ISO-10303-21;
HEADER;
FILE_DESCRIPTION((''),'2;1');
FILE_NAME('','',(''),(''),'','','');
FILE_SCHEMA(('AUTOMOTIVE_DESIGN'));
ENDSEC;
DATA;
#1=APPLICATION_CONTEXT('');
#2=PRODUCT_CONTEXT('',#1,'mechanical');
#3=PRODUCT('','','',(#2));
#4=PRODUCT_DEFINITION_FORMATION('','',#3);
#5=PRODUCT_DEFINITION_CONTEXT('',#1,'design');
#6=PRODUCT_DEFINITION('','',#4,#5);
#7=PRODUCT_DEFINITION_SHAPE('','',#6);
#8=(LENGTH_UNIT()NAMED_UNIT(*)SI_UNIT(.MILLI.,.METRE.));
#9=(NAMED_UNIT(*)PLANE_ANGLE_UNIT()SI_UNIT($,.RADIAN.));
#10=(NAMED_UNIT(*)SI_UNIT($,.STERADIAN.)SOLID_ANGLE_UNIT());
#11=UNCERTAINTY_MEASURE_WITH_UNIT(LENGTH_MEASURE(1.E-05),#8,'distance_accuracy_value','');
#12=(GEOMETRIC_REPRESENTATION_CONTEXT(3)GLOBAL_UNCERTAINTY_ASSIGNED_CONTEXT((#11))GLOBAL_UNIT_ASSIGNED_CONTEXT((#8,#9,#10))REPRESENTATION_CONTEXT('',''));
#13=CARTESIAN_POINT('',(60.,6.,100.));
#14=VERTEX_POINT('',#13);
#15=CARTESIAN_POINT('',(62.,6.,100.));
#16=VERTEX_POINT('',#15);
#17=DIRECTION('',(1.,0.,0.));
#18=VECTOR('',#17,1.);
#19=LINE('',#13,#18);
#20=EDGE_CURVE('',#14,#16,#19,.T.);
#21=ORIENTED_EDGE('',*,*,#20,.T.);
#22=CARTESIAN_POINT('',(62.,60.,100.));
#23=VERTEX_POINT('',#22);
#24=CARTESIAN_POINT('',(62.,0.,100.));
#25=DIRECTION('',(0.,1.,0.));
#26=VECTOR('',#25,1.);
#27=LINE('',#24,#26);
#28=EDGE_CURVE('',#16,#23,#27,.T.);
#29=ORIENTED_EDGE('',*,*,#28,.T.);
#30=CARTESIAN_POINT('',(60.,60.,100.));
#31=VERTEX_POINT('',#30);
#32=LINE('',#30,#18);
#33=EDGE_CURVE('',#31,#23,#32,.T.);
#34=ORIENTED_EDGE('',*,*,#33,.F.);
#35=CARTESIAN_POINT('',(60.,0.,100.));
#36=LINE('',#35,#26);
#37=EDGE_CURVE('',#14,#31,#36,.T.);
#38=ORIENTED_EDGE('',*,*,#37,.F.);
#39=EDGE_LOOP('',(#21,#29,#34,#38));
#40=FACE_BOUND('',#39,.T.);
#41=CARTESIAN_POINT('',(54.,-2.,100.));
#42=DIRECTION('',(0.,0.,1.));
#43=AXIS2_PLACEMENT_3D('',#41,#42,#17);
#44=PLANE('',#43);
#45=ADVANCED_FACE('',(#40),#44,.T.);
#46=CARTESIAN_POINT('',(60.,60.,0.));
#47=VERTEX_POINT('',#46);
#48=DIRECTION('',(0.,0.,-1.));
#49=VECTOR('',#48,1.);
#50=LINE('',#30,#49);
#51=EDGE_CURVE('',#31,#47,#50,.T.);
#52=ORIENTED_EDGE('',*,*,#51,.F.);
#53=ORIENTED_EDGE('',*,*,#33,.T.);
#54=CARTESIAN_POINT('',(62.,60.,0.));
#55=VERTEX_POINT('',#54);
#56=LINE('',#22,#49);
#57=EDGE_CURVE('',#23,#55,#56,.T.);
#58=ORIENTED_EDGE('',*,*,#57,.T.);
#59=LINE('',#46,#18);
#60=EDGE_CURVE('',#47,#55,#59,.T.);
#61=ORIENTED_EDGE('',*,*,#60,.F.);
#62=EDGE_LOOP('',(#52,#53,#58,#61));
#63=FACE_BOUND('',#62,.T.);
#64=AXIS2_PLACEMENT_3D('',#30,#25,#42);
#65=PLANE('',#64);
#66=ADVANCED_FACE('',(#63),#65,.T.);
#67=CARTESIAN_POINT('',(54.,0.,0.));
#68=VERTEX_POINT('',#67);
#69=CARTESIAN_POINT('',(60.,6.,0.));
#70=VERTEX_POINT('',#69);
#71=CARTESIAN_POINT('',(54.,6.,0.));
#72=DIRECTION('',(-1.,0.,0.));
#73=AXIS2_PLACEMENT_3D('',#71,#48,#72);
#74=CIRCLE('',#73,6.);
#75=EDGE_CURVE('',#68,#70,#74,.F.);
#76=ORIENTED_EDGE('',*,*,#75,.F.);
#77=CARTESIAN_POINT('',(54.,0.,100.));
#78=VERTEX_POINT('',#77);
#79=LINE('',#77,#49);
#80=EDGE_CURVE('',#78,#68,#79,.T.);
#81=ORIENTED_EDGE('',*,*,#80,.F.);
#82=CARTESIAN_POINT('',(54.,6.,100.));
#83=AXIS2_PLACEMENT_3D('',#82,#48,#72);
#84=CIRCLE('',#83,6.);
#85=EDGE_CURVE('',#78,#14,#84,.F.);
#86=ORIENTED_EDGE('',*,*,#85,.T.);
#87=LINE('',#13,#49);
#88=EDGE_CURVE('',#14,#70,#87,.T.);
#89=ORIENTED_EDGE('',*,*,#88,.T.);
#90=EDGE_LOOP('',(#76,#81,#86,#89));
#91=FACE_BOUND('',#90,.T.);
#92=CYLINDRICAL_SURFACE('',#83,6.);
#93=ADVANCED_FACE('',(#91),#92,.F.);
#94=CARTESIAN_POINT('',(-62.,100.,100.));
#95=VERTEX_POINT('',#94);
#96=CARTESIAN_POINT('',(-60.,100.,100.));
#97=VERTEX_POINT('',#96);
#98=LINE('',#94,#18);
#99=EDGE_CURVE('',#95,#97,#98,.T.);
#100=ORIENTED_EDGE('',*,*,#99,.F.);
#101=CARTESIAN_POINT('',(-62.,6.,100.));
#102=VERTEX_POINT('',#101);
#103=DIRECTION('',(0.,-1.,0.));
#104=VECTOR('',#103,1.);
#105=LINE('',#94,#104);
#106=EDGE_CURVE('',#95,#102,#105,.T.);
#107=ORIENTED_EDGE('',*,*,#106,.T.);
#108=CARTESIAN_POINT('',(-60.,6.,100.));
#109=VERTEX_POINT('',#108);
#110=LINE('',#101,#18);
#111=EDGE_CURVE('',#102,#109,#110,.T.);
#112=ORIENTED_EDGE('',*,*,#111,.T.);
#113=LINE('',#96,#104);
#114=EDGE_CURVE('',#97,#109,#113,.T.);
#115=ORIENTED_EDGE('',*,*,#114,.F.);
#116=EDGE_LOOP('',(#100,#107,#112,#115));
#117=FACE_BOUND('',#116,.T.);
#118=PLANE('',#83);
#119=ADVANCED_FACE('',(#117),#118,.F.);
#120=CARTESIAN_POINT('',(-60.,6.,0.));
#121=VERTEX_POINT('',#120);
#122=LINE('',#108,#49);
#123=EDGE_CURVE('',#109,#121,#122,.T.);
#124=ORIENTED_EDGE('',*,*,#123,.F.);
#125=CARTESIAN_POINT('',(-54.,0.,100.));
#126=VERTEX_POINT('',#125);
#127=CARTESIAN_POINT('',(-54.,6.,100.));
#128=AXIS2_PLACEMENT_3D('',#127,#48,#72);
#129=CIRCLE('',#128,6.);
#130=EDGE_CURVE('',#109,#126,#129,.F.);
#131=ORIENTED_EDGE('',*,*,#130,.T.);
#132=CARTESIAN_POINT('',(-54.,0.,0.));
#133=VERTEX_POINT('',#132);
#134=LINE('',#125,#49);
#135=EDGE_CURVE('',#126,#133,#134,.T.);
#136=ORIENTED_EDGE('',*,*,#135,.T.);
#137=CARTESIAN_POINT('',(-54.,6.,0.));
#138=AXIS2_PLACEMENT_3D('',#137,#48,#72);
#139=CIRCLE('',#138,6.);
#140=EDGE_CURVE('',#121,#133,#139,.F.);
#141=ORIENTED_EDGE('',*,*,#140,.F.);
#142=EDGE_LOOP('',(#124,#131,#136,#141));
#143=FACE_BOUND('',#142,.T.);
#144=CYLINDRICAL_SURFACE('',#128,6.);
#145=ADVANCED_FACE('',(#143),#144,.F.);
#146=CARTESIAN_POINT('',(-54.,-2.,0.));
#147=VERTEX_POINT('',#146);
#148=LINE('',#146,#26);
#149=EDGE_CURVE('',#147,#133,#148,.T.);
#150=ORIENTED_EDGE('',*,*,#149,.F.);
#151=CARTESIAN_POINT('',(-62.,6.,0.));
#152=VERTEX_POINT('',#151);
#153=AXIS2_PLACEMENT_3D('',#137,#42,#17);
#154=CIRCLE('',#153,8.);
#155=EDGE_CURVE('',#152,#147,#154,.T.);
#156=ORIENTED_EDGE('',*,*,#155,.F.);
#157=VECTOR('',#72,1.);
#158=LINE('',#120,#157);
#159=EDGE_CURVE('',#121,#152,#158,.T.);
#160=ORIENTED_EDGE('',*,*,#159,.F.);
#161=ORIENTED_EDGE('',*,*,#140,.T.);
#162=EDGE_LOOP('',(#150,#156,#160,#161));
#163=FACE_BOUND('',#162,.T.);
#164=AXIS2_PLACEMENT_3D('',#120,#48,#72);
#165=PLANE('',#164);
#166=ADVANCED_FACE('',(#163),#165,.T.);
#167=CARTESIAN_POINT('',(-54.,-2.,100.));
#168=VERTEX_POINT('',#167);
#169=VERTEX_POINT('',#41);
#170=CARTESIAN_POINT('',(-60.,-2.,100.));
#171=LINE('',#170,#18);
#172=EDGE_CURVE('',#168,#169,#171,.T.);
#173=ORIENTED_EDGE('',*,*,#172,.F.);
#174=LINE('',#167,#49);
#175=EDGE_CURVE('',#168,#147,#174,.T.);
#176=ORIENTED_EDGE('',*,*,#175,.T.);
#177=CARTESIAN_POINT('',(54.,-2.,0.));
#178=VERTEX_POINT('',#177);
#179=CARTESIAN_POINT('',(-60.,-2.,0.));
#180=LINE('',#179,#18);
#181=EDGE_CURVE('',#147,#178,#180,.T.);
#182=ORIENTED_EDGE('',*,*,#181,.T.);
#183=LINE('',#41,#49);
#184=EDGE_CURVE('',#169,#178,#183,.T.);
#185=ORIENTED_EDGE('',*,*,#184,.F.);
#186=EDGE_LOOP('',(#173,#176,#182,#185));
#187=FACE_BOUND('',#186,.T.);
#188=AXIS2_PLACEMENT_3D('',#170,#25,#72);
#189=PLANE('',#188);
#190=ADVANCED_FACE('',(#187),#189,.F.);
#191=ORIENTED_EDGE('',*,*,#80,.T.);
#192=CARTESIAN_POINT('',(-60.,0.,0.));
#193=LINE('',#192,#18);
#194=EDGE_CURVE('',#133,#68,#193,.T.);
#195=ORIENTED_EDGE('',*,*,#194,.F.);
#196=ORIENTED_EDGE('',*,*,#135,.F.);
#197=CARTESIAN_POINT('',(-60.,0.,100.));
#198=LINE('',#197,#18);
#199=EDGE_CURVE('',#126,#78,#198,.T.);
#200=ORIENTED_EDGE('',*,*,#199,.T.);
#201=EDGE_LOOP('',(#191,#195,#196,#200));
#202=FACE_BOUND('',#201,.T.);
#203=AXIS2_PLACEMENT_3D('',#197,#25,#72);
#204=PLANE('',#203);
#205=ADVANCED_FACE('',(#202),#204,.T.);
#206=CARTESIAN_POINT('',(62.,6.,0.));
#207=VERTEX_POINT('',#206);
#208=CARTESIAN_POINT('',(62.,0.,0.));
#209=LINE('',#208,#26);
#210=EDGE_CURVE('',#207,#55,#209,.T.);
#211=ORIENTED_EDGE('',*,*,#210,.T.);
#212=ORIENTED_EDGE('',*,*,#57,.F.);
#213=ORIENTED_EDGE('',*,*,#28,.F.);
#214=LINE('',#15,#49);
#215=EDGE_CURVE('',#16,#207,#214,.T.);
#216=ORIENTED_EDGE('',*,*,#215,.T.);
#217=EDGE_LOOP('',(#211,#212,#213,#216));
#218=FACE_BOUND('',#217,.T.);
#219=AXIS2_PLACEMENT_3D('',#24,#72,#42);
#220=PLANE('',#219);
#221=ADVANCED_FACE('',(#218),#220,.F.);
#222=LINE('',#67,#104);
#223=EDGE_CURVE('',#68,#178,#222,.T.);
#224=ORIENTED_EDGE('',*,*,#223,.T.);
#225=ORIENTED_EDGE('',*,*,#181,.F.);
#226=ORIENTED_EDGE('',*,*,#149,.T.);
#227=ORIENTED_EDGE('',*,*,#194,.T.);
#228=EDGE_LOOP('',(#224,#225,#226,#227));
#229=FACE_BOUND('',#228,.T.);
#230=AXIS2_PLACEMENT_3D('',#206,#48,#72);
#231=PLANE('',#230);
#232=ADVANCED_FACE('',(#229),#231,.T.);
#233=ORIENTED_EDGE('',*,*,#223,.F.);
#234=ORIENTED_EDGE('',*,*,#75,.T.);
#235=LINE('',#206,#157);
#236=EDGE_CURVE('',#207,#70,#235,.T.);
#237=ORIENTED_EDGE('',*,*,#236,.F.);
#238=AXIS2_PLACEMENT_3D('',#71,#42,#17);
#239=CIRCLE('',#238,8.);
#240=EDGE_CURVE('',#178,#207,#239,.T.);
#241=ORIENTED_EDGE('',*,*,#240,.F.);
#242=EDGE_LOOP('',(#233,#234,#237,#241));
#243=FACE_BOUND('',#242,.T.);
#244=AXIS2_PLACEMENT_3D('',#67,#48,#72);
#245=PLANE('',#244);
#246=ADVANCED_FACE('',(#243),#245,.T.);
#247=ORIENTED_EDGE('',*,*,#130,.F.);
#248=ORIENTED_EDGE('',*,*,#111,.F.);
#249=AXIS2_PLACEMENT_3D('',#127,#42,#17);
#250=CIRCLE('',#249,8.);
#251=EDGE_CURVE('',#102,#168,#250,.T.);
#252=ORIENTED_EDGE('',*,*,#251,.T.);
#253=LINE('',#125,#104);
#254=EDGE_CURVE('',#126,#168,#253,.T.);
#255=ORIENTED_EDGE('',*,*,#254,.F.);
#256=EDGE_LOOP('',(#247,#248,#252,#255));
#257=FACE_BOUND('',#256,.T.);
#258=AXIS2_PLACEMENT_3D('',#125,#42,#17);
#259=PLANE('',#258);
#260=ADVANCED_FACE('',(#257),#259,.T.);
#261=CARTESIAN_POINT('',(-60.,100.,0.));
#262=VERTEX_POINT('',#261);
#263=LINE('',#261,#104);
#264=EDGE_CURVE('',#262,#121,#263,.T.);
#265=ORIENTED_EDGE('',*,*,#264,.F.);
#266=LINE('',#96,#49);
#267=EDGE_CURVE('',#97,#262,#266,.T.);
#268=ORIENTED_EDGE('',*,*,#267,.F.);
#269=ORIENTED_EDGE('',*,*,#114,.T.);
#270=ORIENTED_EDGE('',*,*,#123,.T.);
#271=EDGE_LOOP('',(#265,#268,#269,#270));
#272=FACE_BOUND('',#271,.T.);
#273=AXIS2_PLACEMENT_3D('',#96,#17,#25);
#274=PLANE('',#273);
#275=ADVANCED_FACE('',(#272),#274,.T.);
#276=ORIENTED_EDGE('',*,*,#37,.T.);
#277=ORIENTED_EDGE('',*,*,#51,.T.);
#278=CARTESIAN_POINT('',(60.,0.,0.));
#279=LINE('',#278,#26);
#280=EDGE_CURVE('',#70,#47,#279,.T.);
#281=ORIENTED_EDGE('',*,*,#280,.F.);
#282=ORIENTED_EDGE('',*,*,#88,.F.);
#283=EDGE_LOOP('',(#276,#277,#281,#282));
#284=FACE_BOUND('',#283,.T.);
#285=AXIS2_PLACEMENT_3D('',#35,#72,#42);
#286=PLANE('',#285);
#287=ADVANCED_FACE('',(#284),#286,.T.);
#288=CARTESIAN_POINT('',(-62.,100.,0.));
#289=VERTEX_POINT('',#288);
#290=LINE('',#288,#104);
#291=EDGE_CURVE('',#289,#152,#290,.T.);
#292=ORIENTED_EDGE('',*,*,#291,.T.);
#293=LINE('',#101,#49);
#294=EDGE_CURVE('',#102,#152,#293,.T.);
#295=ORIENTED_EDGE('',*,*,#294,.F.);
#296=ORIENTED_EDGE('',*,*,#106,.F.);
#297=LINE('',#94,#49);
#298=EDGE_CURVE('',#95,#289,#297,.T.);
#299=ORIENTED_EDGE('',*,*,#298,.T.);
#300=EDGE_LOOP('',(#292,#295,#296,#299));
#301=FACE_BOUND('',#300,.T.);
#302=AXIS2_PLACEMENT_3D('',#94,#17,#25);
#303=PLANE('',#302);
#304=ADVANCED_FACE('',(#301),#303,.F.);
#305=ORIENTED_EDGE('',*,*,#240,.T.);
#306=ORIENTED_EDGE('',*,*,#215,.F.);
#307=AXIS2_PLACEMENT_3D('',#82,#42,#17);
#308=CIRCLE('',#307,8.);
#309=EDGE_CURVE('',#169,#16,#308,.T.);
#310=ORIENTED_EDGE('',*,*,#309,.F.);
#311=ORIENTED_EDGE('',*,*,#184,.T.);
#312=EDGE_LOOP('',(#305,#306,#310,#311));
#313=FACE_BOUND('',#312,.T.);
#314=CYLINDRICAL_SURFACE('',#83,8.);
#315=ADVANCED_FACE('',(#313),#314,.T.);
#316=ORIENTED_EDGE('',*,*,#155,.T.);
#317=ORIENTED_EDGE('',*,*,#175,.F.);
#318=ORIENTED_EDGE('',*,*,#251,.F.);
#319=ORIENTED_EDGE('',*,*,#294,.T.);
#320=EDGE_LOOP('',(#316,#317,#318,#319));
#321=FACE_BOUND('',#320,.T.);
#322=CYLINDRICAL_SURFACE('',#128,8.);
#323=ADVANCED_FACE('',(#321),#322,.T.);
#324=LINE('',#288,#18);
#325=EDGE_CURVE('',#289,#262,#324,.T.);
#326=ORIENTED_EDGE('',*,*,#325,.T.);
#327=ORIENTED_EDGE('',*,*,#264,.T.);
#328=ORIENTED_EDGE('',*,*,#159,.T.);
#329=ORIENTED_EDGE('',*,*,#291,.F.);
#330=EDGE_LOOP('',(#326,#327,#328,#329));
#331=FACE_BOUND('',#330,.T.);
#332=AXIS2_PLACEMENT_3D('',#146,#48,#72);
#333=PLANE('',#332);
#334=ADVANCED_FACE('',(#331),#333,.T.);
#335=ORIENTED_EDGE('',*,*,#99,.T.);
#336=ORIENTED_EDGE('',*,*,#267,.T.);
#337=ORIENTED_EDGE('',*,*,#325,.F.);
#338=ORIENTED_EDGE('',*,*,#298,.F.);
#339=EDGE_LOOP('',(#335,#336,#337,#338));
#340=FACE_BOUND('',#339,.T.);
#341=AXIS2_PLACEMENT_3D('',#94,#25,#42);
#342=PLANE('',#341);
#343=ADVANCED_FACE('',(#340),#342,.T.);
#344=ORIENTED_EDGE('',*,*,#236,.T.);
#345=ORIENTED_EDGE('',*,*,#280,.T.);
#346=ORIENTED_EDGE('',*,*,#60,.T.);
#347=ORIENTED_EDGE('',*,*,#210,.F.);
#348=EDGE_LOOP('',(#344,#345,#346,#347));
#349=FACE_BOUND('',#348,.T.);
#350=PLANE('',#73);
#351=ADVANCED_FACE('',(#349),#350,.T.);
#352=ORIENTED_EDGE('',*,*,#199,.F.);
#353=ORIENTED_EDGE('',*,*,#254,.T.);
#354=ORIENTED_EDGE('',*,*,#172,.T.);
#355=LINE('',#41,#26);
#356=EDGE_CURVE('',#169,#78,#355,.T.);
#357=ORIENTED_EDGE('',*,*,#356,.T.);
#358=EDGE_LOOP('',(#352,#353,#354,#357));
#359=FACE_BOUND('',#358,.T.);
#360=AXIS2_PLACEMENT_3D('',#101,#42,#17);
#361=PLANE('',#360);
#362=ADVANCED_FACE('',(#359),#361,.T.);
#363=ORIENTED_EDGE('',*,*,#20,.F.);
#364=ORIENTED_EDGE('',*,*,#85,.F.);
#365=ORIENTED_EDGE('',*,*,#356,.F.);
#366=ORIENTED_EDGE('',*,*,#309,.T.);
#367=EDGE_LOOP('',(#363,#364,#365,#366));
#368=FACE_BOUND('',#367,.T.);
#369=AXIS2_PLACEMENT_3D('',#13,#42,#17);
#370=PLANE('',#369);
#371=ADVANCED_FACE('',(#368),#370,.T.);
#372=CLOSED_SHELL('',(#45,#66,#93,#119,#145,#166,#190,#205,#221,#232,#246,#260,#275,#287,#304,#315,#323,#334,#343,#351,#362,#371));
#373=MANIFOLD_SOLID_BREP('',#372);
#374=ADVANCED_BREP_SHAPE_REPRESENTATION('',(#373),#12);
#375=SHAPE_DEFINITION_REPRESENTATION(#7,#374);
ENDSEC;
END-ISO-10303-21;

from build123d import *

# Parameters (mm, degrees)
BRIDA_BASE2_DEPTH = 100


# Sheet-metal steps are written as plain solids
with BuildPart() as part:
    # Croquis6 → Brida base2 (new body)
    with BuildSketch(Plane.XY):
        with BuildLine():
            Line((-60, 100), (-60, 6))
            ThreePointArc((-60, 6), (-58.242640687, 1.757359313), (-54, 0))
            Line((-54, 0), (54, 0))
            ThreePointArc((54, 0), (58.242640687, 1.757359313), (60, 6))
            Line((60, 6), (60, 60))
            Line((60, 60), (62, 60))
            Line((62, 60), (62, 6))
            ThreePointArc((62, 6), (59.656854249, 0.343145751), (54, -2))
            Line((54, -2), (-54, -2))
            ThreePointArc((-54, -2), (-59.656854249, 0.343145751), (-62, 6))
            Line((-62, 6), (-62, 100))
            Line((-62, 100), (-60, 100))
        make_face()
    extrude(amount=BRIDA_BASE2_DEPTH)


solid = part.part
